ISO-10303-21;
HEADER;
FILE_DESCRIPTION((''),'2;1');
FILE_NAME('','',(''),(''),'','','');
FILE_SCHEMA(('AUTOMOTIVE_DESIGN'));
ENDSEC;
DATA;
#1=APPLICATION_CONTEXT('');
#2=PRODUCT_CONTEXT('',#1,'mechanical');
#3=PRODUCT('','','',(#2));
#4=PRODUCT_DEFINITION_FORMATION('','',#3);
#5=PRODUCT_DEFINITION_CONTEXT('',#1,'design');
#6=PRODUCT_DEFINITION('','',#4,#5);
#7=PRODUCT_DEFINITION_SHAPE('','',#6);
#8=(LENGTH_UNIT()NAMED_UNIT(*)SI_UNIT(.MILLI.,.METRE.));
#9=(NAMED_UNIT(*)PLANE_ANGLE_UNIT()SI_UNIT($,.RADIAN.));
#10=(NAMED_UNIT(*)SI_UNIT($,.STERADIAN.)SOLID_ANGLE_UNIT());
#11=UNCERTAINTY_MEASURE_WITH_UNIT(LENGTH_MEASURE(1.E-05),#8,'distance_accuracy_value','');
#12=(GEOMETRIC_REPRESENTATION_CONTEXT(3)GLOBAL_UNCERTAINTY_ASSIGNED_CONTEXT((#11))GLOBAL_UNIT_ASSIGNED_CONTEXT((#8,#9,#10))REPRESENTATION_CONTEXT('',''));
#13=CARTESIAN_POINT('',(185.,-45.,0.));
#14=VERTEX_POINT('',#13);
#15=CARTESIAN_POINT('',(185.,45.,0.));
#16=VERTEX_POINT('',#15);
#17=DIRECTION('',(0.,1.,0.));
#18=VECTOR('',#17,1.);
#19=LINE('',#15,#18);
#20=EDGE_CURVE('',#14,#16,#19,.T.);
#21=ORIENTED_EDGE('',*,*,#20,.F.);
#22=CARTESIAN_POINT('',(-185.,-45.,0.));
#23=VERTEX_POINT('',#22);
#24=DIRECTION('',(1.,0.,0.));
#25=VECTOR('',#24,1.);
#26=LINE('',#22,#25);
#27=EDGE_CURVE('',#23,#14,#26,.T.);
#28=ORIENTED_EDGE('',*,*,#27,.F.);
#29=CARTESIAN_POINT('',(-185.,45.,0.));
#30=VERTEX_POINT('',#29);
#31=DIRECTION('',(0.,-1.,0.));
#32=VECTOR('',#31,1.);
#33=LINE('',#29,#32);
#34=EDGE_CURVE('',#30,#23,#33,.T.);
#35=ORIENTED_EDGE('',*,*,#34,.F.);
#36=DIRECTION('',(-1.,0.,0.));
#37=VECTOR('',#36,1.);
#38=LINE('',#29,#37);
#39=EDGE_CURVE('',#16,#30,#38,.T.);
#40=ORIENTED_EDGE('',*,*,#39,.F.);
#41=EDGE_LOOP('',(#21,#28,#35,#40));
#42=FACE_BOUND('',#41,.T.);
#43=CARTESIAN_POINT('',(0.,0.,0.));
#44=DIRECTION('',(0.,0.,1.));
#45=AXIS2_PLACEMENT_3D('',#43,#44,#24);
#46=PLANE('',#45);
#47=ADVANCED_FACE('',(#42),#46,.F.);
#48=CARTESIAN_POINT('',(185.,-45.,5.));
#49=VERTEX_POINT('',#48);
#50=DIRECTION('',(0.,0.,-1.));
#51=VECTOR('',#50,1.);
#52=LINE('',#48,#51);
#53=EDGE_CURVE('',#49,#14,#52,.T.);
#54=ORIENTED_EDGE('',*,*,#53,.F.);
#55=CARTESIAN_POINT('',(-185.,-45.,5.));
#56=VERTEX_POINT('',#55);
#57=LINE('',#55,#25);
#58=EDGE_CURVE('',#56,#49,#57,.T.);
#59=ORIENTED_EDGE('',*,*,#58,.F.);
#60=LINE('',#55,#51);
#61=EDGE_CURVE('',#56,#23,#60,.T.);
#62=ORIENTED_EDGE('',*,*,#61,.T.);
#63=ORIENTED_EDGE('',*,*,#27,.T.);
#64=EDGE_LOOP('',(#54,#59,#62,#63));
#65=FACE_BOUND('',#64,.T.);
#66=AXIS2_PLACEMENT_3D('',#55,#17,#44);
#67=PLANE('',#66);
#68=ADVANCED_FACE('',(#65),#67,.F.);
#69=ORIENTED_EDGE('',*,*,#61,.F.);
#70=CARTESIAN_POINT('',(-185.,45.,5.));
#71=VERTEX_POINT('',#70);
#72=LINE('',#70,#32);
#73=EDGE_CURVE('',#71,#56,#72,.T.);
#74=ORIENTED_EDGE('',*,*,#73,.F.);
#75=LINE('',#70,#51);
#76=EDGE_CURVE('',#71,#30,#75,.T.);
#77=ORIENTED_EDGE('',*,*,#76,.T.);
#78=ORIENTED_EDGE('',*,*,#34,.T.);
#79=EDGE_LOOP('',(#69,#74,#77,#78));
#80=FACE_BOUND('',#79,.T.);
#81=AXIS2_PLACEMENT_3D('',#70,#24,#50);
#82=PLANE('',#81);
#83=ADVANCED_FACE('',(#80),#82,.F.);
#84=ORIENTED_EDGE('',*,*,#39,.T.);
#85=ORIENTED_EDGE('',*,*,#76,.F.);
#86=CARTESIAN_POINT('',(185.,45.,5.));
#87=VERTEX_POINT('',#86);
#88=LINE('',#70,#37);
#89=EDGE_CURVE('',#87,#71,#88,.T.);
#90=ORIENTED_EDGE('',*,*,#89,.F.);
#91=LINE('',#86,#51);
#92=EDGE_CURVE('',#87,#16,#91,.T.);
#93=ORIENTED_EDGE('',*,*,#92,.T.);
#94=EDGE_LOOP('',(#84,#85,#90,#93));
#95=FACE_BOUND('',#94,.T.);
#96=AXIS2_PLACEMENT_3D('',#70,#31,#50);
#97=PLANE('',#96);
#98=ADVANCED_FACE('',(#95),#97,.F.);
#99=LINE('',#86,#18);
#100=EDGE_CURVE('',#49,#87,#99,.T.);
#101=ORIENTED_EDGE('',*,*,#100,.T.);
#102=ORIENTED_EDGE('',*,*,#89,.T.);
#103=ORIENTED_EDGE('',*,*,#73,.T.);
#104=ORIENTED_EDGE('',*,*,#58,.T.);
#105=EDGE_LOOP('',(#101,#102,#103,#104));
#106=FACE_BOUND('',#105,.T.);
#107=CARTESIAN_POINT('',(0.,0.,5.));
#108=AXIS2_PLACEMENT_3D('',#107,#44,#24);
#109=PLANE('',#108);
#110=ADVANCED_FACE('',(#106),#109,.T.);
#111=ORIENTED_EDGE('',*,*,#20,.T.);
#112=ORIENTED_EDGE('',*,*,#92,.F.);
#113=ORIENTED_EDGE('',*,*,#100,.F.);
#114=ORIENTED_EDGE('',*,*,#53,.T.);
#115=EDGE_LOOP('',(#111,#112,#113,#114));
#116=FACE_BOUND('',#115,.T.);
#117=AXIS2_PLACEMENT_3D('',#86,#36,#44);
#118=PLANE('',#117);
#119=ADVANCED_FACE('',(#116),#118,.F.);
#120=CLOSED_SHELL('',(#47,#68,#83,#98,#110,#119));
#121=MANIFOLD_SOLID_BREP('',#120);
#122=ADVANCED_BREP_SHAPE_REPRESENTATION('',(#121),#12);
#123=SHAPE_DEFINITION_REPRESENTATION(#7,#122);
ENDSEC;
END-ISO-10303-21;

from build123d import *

# Parameters (mm, degrees)
SKETCH1_W           = 370
SKETCH1_H           = 90
BOSS_EXTRUDE1_DEPTH = 5


with BuildPart() as part:
    # Sketch1 → Boss-Extrude1 (new body)
    with BuildSketch(Plane.XY):
        Rectangle(SKETCH1_W, SKETCH1_H)
    extrude(amount=BOSS_EXTRUDE1_DEPTH)


solid = part.part
